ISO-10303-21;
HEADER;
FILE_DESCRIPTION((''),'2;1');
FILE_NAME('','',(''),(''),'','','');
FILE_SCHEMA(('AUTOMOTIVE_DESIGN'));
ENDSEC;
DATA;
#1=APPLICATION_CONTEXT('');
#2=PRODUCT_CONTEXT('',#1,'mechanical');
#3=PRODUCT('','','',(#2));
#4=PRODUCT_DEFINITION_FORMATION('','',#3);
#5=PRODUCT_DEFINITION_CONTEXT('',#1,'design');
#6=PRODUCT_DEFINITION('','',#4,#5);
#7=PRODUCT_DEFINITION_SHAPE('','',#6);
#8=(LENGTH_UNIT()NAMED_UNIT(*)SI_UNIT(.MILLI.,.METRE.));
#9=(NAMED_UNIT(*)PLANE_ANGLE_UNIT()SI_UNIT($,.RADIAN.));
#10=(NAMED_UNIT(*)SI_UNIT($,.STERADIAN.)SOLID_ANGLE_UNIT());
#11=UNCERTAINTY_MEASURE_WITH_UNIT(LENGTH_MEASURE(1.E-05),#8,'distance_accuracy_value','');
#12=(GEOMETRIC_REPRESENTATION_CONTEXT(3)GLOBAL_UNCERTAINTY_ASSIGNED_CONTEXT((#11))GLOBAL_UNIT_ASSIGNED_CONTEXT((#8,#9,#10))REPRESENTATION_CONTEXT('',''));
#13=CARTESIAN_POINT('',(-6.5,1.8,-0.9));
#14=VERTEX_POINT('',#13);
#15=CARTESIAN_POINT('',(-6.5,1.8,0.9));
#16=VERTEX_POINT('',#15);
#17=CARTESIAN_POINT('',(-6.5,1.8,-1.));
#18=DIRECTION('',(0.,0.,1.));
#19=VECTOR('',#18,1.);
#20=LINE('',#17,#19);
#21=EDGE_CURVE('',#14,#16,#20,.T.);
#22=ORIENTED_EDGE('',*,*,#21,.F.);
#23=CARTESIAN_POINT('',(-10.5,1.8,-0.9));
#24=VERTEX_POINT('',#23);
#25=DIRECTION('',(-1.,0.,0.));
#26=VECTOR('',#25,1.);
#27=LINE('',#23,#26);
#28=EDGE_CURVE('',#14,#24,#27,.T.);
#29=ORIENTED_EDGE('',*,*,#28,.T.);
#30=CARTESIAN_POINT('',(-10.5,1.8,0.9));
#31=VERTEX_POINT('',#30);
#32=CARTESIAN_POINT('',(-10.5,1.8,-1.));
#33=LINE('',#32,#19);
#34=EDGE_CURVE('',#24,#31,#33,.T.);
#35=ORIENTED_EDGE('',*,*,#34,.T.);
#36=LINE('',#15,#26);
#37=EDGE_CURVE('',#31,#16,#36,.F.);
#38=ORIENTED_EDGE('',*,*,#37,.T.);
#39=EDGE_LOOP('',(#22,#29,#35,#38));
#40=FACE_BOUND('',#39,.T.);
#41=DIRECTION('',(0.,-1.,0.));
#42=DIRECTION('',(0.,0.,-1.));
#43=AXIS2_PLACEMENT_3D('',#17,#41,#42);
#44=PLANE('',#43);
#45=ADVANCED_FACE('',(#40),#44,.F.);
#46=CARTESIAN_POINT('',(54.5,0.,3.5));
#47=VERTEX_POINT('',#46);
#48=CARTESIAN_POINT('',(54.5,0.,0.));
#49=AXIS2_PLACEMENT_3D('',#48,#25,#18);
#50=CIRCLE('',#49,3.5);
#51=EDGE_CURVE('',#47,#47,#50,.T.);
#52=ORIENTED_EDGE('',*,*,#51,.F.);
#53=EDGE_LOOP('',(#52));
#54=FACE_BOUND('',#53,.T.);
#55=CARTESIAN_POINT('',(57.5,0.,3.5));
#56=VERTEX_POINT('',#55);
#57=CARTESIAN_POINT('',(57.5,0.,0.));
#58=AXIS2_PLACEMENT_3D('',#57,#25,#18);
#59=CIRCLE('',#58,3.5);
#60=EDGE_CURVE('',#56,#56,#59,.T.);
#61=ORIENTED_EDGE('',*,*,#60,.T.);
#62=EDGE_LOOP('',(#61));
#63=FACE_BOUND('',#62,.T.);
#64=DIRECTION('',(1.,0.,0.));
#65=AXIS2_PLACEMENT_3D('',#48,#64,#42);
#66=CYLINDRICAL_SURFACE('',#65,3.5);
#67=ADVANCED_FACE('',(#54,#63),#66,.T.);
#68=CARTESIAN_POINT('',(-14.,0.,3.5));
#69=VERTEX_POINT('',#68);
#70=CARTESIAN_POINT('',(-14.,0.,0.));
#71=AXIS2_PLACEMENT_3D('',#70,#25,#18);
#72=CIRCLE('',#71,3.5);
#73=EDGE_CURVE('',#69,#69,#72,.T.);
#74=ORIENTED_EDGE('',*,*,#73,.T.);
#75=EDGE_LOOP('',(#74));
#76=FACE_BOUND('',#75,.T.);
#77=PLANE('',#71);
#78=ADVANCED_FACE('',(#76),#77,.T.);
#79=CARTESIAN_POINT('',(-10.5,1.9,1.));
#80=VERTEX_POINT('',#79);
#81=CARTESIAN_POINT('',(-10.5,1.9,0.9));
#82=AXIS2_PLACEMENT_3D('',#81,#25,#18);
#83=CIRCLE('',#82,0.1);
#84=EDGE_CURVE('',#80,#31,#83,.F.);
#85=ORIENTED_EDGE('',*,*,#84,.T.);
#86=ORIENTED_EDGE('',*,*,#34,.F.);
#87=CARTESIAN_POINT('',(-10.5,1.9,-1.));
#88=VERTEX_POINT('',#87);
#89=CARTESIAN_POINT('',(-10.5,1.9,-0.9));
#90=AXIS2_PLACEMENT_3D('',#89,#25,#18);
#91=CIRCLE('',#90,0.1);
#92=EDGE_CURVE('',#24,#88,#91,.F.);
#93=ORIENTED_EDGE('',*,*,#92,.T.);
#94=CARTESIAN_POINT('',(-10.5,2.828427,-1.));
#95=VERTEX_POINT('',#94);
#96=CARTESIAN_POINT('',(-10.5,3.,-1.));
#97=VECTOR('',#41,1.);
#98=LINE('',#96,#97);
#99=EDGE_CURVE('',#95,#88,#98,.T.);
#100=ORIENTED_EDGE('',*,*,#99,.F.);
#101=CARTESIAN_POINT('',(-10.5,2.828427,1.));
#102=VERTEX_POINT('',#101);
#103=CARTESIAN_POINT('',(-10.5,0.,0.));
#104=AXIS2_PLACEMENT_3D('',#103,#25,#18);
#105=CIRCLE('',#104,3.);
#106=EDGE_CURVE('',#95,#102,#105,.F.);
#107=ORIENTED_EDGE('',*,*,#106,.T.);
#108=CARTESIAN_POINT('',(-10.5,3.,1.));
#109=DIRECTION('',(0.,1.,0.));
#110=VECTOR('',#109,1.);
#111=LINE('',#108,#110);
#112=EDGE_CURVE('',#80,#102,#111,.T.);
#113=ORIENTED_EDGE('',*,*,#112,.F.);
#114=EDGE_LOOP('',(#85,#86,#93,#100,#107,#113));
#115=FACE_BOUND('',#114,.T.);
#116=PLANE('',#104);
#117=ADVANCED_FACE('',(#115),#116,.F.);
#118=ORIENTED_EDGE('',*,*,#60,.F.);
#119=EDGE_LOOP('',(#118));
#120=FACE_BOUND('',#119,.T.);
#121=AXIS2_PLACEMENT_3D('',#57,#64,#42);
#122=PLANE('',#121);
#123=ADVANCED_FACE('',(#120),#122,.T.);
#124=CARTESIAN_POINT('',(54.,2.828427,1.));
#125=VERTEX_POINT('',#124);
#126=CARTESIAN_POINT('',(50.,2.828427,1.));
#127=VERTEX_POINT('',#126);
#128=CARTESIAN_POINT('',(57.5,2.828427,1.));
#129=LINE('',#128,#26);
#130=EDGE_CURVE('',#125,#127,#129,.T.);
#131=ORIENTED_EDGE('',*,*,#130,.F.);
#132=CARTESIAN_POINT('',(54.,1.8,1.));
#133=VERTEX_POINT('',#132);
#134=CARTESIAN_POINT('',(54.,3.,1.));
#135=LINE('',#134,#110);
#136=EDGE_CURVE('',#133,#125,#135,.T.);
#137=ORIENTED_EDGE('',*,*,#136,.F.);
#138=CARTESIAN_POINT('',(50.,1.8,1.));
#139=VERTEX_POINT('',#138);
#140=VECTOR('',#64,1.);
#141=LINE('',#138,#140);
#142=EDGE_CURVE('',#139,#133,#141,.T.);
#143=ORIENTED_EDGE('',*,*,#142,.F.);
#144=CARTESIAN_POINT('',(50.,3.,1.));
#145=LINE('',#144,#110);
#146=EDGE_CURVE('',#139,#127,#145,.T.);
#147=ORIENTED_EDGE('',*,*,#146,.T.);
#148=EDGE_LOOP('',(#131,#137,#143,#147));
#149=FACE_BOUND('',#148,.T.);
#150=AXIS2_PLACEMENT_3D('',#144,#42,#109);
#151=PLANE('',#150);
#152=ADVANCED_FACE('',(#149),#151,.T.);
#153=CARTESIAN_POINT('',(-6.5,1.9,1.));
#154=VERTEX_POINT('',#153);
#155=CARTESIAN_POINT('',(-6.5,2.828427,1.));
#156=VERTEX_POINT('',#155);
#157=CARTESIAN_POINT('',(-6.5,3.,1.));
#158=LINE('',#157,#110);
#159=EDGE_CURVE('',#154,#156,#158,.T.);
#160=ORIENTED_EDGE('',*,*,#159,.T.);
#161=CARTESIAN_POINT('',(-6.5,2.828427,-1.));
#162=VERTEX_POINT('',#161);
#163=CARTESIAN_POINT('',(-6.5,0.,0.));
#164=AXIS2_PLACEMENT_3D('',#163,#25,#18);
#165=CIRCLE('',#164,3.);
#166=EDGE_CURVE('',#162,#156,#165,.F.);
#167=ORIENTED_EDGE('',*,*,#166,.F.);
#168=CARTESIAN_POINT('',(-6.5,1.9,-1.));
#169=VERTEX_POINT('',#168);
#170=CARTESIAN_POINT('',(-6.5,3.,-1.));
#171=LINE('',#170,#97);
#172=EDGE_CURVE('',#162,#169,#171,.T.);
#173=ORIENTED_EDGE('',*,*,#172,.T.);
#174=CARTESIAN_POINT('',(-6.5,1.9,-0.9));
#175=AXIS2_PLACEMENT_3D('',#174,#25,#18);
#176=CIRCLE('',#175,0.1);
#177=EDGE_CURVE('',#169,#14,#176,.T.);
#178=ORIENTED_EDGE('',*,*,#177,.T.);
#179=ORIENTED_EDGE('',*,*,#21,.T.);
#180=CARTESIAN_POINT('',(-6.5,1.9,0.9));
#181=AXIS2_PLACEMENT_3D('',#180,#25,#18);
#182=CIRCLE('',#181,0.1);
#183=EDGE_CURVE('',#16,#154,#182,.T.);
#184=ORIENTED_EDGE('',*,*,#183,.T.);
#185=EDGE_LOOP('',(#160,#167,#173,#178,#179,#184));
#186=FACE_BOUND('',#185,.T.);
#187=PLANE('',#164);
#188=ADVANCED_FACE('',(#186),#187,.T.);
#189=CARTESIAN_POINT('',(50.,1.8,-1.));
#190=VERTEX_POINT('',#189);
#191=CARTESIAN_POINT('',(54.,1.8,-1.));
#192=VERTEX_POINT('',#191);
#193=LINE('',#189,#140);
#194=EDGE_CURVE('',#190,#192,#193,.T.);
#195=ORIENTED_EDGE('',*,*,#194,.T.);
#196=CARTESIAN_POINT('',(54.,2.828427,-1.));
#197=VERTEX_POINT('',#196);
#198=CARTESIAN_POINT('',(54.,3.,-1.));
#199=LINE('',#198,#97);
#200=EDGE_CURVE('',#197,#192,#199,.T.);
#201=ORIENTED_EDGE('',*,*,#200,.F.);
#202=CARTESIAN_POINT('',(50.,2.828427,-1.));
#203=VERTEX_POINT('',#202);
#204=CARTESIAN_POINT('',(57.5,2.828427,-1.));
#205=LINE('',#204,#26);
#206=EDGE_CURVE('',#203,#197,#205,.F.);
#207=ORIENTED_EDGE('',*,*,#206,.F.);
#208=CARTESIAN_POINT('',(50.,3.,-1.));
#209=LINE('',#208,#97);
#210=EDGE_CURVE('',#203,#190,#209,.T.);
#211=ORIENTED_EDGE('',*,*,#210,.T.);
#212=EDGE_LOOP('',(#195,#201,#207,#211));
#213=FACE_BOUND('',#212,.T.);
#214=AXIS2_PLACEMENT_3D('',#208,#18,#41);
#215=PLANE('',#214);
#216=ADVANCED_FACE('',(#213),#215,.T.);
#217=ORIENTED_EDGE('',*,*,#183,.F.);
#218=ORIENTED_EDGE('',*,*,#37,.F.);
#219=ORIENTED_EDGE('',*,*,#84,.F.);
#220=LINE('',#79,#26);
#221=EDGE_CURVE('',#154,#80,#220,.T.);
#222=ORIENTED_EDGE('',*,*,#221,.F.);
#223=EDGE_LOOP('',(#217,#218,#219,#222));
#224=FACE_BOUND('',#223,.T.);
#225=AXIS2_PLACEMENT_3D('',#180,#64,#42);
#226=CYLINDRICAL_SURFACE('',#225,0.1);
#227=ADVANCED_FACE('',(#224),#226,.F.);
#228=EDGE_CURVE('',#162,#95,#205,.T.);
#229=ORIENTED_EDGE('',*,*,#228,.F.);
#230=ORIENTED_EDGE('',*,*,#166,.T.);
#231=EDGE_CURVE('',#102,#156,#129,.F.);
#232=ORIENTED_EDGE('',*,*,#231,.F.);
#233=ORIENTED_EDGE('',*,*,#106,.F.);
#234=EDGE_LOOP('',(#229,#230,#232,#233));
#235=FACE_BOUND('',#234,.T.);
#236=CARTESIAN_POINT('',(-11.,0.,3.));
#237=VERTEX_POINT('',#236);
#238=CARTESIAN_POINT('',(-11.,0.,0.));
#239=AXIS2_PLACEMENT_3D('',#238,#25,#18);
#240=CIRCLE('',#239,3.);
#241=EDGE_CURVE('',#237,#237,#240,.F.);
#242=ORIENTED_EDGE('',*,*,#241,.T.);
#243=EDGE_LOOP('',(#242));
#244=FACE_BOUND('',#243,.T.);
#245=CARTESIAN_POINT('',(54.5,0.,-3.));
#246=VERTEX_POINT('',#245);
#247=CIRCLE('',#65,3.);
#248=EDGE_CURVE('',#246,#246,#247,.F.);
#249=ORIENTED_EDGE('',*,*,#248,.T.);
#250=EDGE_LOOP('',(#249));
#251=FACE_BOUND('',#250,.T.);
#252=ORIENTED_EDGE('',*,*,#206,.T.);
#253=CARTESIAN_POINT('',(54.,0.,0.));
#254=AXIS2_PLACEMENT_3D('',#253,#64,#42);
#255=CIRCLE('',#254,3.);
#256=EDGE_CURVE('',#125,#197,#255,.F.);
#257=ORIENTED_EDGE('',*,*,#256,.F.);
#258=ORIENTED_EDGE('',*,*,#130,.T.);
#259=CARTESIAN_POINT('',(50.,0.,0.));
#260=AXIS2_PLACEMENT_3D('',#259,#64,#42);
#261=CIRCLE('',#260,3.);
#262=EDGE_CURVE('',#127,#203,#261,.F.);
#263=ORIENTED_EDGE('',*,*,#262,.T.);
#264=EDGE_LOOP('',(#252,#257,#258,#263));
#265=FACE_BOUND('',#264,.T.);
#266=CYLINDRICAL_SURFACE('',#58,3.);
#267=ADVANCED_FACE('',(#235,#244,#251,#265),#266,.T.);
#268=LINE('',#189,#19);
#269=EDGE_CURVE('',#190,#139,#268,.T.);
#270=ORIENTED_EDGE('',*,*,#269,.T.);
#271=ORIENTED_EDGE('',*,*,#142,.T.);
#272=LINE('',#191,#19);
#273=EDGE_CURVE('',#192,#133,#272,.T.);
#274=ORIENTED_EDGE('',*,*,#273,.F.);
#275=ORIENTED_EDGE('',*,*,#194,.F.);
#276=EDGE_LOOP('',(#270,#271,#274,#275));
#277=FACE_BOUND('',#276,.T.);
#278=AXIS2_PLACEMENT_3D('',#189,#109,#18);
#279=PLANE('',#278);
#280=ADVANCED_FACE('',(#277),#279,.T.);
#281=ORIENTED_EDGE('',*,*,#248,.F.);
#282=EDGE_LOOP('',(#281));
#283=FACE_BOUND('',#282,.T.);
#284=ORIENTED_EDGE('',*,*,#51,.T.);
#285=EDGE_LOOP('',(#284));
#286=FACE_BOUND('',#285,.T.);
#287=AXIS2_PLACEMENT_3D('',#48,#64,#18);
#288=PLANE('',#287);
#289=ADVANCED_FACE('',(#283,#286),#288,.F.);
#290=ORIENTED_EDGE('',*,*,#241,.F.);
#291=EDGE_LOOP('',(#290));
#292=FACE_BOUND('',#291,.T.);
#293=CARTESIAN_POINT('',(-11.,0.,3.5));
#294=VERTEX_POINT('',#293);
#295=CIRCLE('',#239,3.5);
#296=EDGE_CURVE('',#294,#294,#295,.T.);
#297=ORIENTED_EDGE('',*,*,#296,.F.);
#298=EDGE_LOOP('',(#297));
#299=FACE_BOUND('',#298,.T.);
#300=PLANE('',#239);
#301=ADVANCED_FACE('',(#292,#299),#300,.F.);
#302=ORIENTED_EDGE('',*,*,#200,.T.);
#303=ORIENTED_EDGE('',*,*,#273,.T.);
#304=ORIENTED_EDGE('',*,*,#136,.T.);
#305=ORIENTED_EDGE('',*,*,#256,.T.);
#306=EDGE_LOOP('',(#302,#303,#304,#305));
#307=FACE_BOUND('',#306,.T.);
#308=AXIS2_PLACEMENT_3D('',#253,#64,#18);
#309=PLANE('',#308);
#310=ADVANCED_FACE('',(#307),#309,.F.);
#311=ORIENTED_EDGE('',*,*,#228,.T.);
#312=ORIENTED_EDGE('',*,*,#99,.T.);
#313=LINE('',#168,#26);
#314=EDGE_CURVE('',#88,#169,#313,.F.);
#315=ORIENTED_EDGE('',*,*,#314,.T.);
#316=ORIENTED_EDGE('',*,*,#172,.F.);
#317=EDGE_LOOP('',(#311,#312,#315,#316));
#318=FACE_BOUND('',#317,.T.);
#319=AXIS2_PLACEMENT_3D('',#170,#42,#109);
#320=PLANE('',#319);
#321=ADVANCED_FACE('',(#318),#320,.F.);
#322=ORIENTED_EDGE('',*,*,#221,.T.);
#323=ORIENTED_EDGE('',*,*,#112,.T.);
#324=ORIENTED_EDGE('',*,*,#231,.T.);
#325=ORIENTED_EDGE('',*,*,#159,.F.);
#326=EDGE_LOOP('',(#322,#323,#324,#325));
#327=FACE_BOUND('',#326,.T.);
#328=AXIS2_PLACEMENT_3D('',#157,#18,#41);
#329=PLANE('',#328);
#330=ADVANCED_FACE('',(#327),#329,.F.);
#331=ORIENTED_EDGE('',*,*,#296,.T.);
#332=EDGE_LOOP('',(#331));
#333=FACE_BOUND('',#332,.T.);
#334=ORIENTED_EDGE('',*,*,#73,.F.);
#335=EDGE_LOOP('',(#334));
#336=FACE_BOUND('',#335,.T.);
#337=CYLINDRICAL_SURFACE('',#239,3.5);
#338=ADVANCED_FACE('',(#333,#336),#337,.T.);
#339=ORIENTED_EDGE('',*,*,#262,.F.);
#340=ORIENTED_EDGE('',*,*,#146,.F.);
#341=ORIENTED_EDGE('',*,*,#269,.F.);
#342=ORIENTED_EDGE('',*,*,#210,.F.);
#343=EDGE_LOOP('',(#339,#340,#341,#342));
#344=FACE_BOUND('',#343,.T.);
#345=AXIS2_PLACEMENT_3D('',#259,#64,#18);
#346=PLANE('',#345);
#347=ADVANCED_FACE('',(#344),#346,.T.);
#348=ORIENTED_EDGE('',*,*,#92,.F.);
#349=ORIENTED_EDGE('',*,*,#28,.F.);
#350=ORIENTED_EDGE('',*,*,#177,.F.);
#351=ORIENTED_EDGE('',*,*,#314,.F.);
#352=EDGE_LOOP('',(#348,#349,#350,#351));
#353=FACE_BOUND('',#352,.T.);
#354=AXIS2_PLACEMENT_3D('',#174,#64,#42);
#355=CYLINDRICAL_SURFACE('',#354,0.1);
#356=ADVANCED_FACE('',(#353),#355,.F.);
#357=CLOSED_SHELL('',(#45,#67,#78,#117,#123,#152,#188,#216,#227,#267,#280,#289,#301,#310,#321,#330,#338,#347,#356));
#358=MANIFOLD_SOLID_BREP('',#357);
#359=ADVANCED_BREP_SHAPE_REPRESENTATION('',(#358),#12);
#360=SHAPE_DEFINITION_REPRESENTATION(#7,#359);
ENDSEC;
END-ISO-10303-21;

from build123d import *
from build123d.topology import SkipClean

# Parameters (mm, degrees)
SKETCH_2_R          = 3
EXTRUDE_1_DEPTH     = 4
EXTRUDE_2_DEPTH     = 2.5
SKETCH_5_R          = 2.5
EXTRUDE_3_DEPTH     = 9
MIRROR_START        = 15.5
MIRROR_1_DEPTH      = 0.381197772
MIRROR_START_2      = 15.881197772
MIRROR_1_2_DEPTH    = 4.618802228
EXTRUDE_4_DEPTH     = 5
SKETCH_10_R         = 2.5
EXTRUDE_5_DEPTH     = 6
SKETCH_11_R         = 3
EXTRUDE_6_DEPTH     = 5.5
EXTRUDE_START       = 10
SKETCH_12_R         = 3
EXTRUDE_8_DEPTH     = 10
SKETCH_13_R         = 3
EXTRUDE_9_DEPTH     = 10
SKETCH_14_OUTSIDE_W = 32.048
SKETCH_14_OUTSIDE_H = 35.048
SKETCH_14_OUTSIDE_R = 3
CUT_EXTRUDE_2_DEPTH = 59.352377883
SKETCH_15_R         = 3
EXTRUDE_10_DEPTH    = 29.5
EXTRUDE_11_DEPTH    = 26.5
CUT_EXTRUDE_START   = -3.5
SKETCH_17_W         = 2
SKETCH_17_H         = 1.2
CUT_EXTRUDE_3_DEPTH = 4
FILLET_1_R          = 0.1
SKETCH_18_R         = 3.5
EXTRUDE_12_DEPTH    = 3


with BuildPart() as part:
    # 草图2 → 凸台-拉伸1 (new, symmetric)
    with BuildSketch(Plane(origin=(0, 0, 0), x_dir=(0, 0, -1), z_dir=(1, 0, 0))):
        Circle(SKETCH_2_R)
    extrude_1 = extrude(amount=EXTRUDE_1_DEPTH, both=True)

    # 草图3 → 凸台-拉伸2 (add, symmetric)
    with BuildSketch(Plane(origin=(4, 0, 0), x_dir=(0, 0, -1), z_dir=(1, 0, 0))):
        with BuildLine():
            Line((5, 0), (5, -8))
            ThreePointArc((5, -8), (0, -13), (-5, -8))
            Line((-5, -8), (-5, 0))
            ThreePointArc((-5, 0), (0, 5), (5, 0))
        make_face()
    extrude(amount=EXTRUDE_2_DEPTH, both=True)

    # 切除-旋转1: read off the stored shape, not the designer's step
    # 切除-旋转1 outline → 切除-旋转1 (revolve, cut)
    with BuildSketch(Plane.YX):
        Polygon((13.0002322, 6.118936215), (4.99999958, 1.499999757), (13.0002322, 1.499999757), align=None)
    revolve(axis=Axis((0, 0, 0), (1, 0, 0)), mode=Mode.SUBTRACT)

    # 草图5 → 凸台-拉伸3 (add)
    with BuildSketch(Plane(origin=(6.5, 0, 0), x_dir=(0, 0, -1), z_dir=(1, 0, 0))):
        with Locations((0, -8)):
            Circle(SKETCH_5_R)
    extrude(amount=EXTRUDE_3_DEPTH)

    # 镜向1: read off the stored shape, not the designer's step
    # 镜向1 outline → 镜向1 (add)
    with BuildSketch(Plane.YZ.offset(MIRROR_START)):
        with BuildLine():
            Line((-8, -5), (0, -5))
            ThreePointArc((0, -5), (5, 0), (0, 5))
            Line((0, 5), (-7.999999997, 5))
            ThreePointArc((-7.999999997, 5), (-13, 2e-09), (-8, -5))
        make_face()
    extrude(amount=MIRROR_1_DEPTH)

    # Mirror 1 2 outline → Mirror 1 2 (add)
    with BuildSketch(Plane.YZ.offset(MIRROR_START_2)):
        with BuildLine():
            Line((-8, -5), (0, -5))
            ThreePointArc((0, -5), (5, 0), (0, 5))
            Line((0, 5), (-7.999999997, 5))
            ThreePointArc((-7.999999997, 5), (-13, 2e-09), (-8, -5))
        make_face()
    extrude(amount=MIRROR_1_2_DEPTH)

    # Mirror 1 3 outline → Mirror 1 3 (revolve, cut)
    with BuildSketch(Plane.YX):
        Polygon((13.0002322, 20.500000243), (4.99999958, 20.500000243), (13.0002322, 15.881063785), align=None)
    revolve(axis=Axis((0, 0, 0), (1, 0, 0)), mode=Mode.SUBTRACT)

    # 镜向2: 凸台-拉伸1 across plane
    add(extrude_1.mirror(Plane(origin=(11, 0, 0), x_dir=(0, 0, 1), z_dir=(1, 0, 0))))

    # 草图6 → 凸台-拉伸4 (add)
    with BuildSketch(Plane(origin=(26, 0, 0), x_dir=(0, 0, -1), z_dir=(1, 0, 0))):
        with BuildLine():
            Line((0, -5), (-5, -5))
            ThreePointArc((-5, -5), (-10, 0), (-5, 5))
            Line((-5, 5), (0, 5))
            ThreePointArc((0, 5), (5, 0), (0, -5))
        make_face()
    extrude_4 = extrude(amount=EXTRUDE_4_DEPTH)

    # 切除-旋转2: read off the stored shape, not the designer's step
    # 切除-旋转2 outline → 切除-旋转2 (revolve, cut)
    with BuildSketch(Plane.YX):
        Polygon((10.000264544, 30.195720135), (5, 26), (10.000264544, 26), align=None)
    cut_revolve_2 = revolve(axis=Axis((0, 0, 0), (1, 0, 0)), mode=Mode.SUBTRACT)

    # 草图10 → 凸台-拉伸5 (add)
    with BuildSketch(Plane(origin=(31, 0, 0), x_dir=(0, 0, -1), z_dir=(1, 0, 0))):
        with Locations((-5, 0)):
            Circle(SKETCH_10_R)
    extrude(amount=EXTRUDE_5_DEPTH)

    # 镜向3: 凸台-拉伸4, 切除-旋转2 across plane
    add(extrude_4.mirror(Plane(origin=(34, 0, 0), x_dir=(0, 0, 1), z_dir=(1, 0, 0))))
    add(cut_revolve_2.mirror(Plane(origin=(34, 0, 0), x_dir=(0, 0, 1), z_dir=(1, 0, 0))), mode=Mode.SUBTRACT)

    # 草图11 → 凸台-拉伸6 (add)
    with BuildSketch(Plane(origin=(42, 0, 0), x_dir=(0, 0, -1), z_dir=(1, 0, 0))):
        Circle(SKETCH_11_R)
    extrude(amount=EXTRUDE_6_DEPTH)

    # 草图12 → 凸台-拉伸8 (add)
    with BuildSketch(Plane.ZY.offset(4).offset(EXTRUDE_START)):
        Circle(SKETCH_12_R)
    extrude(amount=-EXTRUDE_8_DEPTH)

    # 草图13 → 凸台-拉伸9 (add)
    with BuildSketch(Plane(origin=(47.5, 0, 0), x_dir=(0, 0, -1), z_dir=(1, 0, 0))):
        with Locations(Location((0, 0, 0), (0, 0, 180))):
            Circle(SKETCH_13_R)
    extrude(amount=EXTRUDE_9_DEPTH)

    # 草图14 outside → 切除-拉伸2 (cut, through all)
    with SkipClean():  # the faces are left unmerged after this step: merging them gives an invalid solid
        with BuildSketch(Plane.ZY.offset(-1.5)):
            with Locations((2.5, -4)):
                Rectangle(SKETCH_14_OUTSIDE_W, SKETCH_14_OUTSIDE_H)
            Circle(SKETCH_14_OUTSIDE_R, mode=Mode.SUBTRACT)
        extrude(amount=-CUT_EXTRUDE_2_DEPTH, mode=Mode.SUBTRACT)


with BuildPart() as cut_extrude_2_piece_1:
    # of the separate pieces the step leaves, piece 1, a body of its own (cut_extrude_2_pieces)
    add(part.part.solids().sort_by_distance((37, -1.139901312, 2.775))[0])



with BuildPart() as cut_extrude_2_piece_2:
    # of the separate pieces the step leaves, piece 2, a body of its own (cut_extrude_2_pieces)
    add(part.part.solids().sort_by_distance((6.5, 0, 3))[0])


with BuildPart() as cut_extrude_2_piece_1_1:
    with SkipClean():  # the faces are left unmerged after this step: merging them gives an invalid solid
        add(cut_extrude_2_piece_1.part)

        add(cut_extrude_2_piece_2.part)  # 凸台-拉伸10 merges 切除-拉伸2 piece 2
        # 草图15 → 凸台-拉伸10 (add)
        with BuildSketch(Plane.ZY.offset(-15.5)):
            Circle(SKETCH_15_R)
        extrude(amount=EXTRUDE_10_DEPTH)

    # 草图16 → 凸台-拉伸11 (add)
    with BuildSketch(Plane(origin=(31, 0, 0), x_dir=(0, 0, -1), z_dir=(1, 0, 0))):
        with BuildLine():
            ThreePointArc((-2.775, -1.139901312), (-2.5, 0), (-2.775, 1.139901312))
            ThreePointArc((-2.775, 1.139901312), (3, 0), (-2.775, -1.139901312))
        make_face()
    extrude(amount=EXTRUDE_11_DEPTH)

    # 草图17 → 切除-拉伸3 (cut)
    with SkipClean():  # the faces are left unmerged after this step: merging them gives an invalid solid
        with BuildSketch(Plane.ZY.offset(14).offset(CUT_EXTRUDE_START)):
            with Locations((0, 2.4)):
                Rectangle(SKETCH_17_W, SKETCH_17_H)
        cut_extrude_3 = extrude(amount=-CUT_EXTRUDE_3_DEPTH, mode=Mode.SUBTRACT)

    # 圆角1
    fillet_1_edges = [cut_extrude_2_piece_1_1.edges().sort_by_distance(p)[0] for p in [
        (-8.5, 1.8, 1),
        (-8.5, 1.8, -1),
    ]]
    fillet(fillet_1_edges, radius=FILLET_1_R)

    # 镜向4: 切除-拉伸3 across plane
    with SkipClean():  # the faces are left unmerged after this step: merging them gives an invalid solid
        add(cut_extrude_3.mirror(Plane.ZY.offset(-21.75)), mode=Mode.SUBTRACT)

    # 草图18 → 凸台-拉伸12 (add)
    with SkipClean():  # the faces are left unmerged after this step: merging them gives an invalid solid
        with BuildSketch(Plane.ZY.offset(14)):
            Circle(SKETCH_18_R)
        extrude_12 = extrude(amount=-EXTRUDE_12_DEPTH)

    # 镜向5: 凸台-拉伸12 across plane
    with SkipClean():  # the faces are left unmerged after this step: merging them gives an invalid solid
        add(extrude_12.mirror(Plane.ZY.offset(-21.75)))


solid = cut_extrude_2_piece_1_1.part
